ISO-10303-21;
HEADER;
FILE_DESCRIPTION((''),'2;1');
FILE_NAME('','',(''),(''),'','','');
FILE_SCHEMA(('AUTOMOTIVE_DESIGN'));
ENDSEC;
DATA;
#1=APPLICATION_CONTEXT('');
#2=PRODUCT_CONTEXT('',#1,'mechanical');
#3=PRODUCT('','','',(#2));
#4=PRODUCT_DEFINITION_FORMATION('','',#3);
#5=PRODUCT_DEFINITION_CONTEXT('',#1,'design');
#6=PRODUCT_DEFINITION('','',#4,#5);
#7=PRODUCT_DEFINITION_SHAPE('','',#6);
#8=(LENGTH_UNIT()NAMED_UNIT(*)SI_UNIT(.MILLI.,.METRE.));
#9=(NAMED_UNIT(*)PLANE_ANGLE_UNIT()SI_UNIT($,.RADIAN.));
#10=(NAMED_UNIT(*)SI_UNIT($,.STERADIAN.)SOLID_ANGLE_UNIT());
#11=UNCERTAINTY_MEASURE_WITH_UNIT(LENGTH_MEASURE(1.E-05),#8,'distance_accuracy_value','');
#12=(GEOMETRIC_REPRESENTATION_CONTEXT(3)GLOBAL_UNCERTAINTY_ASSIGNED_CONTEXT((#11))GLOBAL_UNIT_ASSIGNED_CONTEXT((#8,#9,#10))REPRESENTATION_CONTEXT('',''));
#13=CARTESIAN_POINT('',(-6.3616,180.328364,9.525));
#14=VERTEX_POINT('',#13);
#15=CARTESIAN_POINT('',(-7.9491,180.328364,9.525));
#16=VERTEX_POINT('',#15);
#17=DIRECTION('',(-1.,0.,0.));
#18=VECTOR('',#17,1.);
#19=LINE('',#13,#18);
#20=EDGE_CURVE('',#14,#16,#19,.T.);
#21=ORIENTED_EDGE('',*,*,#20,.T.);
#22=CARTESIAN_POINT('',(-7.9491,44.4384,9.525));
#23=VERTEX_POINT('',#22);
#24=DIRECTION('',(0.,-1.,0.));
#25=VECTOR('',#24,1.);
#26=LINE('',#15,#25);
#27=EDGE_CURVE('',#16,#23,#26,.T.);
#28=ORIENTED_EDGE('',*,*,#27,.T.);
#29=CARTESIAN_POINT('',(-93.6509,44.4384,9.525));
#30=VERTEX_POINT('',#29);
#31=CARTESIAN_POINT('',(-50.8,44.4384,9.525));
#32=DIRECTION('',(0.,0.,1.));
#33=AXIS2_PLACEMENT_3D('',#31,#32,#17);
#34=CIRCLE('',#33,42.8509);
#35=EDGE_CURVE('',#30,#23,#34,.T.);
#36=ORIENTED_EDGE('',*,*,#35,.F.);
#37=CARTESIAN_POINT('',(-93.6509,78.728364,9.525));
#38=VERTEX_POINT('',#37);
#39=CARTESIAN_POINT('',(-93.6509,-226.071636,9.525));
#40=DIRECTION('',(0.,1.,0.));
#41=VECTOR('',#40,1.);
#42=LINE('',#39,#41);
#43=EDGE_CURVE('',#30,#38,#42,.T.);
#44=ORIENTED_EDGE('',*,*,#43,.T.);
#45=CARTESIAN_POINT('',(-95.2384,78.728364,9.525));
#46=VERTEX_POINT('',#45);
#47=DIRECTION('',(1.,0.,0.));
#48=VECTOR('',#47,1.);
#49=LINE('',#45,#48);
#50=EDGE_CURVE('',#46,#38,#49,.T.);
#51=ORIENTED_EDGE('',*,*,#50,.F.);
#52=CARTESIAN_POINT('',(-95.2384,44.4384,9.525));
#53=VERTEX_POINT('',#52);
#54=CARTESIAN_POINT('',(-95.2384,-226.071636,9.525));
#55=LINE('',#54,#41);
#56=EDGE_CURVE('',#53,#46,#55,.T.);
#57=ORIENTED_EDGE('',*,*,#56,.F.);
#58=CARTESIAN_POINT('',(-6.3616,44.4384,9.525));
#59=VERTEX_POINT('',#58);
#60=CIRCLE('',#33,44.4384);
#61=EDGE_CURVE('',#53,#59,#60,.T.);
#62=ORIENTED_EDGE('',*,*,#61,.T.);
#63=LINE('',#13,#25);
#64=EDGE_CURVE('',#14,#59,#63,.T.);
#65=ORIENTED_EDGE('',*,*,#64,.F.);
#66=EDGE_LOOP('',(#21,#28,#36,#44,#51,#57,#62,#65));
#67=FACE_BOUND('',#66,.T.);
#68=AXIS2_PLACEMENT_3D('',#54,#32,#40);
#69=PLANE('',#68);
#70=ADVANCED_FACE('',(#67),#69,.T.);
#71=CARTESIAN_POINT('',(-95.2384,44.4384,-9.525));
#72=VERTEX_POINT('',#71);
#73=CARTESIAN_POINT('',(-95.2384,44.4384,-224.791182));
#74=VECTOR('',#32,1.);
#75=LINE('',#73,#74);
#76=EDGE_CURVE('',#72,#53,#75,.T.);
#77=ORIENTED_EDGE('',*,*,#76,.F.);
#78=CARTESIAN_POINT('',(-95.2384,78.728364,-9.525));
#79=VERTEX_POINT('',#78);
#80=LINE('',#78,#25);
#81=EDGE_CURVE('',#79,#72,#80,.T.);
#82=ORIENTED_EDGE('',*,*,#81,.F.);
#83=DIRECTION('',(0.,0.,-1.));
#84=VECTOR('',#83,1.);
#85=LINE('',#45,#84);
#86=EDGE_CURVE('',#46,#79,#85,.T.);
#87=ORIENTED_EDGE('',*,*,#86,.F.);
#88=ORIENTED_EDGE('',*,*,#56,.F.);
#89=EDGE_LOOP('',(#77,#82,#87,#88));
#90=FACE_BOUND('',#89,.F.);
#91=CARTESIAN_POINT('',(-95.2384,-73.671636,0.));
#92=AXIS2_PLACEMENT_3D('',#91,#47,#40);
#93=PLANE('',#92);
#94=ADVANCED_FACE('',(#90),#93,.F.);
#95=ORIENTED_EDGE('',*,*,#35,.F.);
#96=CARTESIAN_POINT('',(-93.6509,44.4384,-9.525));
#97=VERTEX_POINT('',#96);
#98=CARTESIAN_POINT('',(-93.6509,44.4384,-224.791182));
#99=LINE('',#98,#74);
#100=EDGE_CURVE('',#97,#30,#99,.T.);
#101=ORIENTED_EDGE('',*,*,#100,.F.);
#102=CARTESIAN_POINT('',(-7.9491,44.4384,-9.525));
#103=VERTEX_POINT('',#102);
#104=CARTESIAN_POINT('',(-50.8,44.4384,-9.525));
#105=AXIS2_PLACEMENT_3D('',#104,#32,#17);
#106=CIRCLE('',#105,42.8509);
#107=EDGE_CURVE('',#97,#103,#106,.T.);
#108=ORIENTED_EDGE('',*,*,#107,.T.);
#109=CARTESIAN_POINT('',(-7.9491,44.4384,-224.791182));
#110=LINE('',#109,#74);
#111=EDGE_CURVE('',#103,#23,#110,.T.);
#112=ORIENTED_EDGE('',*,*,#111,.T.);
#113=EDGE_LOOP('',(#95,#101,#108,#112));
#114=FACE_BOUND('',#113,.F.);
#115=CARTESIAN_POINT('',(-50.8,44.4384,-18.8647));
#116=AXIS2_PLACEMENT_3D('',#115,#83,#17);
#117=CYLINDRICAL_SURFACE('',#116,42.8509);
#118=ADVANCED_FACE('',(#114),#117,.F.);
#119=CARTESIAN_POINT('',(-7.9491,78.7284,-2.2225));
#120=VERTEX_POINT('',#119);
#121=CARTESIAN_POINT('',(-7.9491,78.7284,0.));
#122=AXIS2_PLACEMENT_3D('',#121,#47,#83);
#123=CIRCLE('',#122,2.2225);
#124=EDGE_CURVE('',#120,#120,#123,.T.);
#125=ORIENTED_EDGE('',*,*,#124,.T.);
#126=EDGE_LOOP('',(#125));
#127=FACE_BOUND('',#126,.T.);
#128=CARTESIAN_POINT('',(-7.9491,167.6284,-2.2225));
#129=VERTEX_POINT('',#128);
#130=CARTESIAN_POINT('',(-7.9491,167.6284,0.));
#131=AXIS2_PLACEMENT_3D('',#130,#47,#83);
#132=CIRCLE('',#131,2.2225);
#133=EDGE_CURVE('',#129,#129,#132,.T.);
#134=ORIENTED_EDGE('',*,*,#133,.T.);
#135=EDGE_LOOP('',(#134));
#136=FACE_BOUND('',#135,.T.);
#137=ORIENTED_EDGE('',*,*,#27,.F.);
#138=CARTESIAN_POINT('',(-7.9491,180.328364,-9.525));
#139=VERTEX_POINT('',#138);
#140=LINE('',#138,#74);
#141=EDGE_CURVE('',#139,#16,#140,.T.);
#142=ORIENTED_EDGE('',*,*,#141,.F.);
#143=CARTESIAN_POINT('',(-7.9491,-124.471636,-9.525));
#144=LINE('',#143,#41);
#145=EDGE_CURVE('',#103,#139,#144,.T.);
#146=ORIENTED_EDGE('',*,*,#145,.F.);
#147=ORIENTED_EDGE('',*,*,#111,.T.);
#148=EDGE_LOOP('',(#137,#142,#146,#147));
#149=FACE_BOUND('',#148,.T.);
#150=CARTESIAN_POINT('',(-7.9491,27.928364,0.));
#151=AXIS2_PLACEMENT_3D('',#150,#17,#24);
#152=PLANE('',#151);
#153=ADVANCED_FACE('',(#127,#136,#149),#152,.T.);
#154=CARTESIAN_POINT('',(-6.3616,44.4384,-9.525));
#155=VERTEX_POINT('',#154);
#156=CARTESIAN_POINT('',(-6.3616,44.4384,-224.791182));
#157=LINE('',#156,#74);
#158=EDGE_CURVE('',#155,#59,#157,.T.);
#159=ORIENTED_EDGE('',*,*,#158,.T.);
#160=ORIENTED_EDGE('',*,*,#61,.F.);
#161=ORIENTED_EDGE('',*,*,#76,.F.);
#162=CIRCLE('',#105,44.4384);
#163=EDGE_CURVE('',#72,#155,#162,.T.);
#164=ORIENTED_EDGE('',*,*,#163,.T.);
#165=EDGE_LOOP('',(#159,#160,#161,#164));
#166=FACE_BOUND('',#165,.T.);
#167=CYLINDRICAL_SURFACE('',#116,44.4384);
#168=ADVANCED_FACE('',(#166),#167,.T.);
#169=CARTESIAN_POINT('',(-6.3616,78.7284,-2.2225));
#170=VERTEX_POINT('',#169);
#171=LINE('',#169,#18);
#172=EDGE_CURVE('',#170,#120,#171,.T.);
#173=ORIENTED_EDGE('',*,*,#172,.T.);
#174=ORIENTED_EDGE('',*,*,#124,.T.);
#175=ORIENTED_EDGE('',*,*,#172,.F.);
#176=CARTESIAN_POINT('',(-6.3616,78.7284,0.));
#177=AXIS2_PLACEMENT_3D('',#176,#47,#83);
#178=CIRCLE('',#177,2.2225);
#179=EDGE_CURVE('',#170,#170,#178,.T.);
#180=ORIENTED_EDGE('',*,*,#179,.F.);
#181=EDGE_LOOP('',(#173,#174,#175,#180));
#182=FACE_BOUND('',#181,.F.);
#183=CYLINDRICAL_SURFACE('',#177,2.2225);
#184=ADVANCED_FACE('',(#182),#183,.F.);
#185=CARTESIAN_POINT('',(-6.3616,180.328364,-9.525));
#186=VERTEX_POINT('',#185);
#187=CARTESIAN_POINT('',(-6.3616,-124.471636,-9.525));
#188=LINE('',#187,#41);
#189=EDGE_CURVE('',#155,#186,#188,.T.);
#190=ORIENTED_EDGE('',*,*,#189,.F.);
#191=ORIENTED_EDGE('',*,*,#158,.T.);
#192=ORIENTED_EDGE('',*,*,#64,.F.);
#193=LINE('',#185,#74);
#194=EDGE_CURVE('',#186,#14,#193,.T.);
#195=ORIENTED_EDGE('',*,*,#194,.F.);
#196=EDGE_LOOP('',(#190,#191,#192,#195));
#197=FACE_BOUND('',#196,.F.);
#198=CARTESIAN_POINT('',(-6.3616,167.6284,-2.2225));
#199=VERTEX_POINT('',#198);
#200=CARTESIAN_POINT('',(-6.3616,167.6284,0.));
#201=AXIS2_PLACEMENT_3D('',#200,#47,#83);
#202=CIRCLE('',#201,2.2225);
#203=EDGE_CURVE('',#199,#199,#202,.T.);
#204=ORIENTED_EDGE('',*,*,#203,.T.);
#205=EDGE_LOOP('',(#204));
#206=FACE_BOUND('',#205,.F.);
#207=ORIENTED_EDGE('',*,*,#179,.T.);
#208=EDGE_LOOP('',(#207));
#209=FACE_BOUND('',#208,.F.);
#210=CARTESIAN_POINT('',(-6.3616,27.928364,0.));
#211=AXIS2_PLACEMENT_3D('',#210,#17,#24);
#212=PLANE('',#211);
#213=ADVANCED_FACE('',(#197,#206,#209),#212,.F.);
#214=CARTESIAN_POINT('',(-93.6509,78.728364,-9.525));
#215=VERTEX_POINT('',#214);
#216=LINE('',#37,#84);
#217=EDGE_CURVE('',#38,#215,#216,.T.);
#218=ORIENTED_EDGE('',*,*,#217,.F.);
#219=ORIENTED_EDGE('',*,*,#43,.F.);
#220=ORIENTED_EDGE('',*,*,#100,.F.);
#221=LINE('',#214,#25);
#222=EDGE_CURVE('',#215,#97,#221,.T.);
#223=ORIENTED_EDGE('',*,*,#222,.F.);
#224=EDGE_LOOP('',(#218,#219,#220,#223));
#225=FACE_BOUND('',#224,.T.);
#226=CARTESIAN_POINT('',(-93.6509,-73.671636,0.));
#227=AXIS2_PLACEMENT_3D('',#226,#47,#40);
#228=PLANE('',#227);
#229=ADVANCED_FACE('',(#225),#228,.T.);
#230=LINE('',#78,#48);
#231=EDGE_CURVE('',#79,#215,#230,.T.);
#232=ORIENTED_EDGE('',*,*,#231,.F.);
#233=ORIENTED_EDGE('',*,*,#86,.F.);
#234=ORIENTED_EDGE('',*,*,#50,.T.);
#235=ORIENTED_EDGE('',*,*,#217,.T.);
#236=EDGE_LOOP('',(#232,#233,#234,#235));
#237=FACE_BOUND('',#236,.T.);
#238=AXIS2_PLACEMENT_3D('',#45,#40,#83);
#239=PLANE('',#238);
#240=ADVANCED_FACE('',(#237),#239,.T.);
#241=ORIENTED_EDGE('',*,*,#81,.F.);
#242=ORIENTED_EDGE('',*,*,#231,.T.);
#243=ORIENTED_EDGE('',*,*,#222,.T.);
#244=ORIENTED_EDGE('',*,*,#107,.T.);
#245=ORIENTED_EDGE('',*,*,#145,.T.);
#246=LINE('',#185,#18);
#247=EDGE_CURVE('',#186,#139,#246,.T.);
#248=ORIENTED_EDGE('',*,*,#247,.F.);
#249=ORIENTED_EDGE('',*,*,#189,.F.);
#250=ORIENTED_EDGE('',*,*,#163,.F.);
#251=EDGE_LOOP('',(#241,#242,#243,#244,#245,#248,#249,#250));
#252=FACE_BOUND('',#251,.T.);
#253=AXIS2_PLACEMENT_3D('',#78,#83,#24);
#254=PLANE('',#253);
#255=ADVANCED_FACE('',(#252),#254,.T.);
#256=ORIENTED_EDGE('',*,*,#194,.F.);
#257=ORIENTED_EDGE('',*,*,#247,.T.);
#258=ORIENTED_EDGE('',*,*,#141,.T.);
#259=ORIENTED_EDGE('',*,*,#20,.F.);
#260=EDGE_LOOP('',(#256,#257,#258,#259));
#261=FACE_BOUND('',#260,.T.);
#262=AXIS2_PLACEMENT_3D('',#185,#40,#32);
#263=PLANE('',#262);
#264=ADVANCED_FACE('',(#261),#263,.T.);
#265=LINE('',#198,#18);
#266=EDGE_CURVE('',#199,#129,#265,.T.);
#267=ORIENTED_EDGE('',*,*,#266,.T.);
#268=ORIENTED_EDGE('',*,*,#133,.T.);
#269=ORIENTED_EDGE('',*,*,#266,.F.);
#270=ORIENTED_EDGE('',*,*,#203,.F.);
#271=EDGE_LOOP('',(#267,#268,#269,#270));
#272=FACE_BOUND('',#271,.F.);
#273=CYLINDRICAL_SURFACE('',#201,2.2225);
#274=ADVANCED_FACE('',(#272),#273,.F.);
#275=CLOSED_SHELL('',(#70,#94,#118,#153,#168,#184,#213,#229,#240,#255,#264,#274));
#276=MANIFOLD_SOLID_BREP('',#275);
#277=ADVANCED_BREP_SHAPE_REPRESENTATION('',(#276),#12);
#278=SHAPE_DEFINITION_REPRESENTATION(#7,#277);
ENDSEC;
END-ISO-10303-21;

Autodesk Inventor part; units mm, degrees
ref_plane "YZ Plane" through (0, 0, 0) normal (1, 0, 0) x (0, 1, 0)
ref_plane "XZ Plane" through (0, 0, 0) normal (0, 1, 0) x (-1, 0, 0)
ref_plane "XY Plane" through (0, 0, 0) normal (0, 0, 1) x (1, 0, 0)
sketch "Sketch1" plane through (0, 0, 0) normal (0, 1, 0) x (-1, 0, 0)
  line L0 (152.4, -9.525) -> (-152.4, -9.525)
  line L1 (-152.4, -9.525) -> (-152.4, 9.525)
  line L2 (-152.4, 9.525) -> (152.4, 9.525)
  line L3 (152.4, 9.525) -> (152.4, -9.525)
  line L4 (152.4, -9.525) -> (-152.4, 9.525) construction
  line L5 (-152.4, -9.525) -> (152.4, 9.525) construction
  point P0 (0, 0)
  dimension "d0" = 19.05
  dimension "d1" = 304.8
extrude "Extrusion1" add sketch "Sketch1" along normal blind 1.5875
sketch "Sketch2" plane through (0, 1.5875, 0) normal (0, 1, 0) x (1, 0, 0)
  line L0 (152.4, -9.525) -> (152.4, 9.525) projected
  line L1 (50.8, 36.3839) -> (50.8, -48.8029) construction
  line L2 (-50.8, 37.7294) -> (-50.8, -44.9073)
  line L3 (152.4, 9.525) -> (-152.4, 9.525) projected
  line L4 (-152.4, 9.525) -> (-152.4, -9.525) projected
  line L5 (-152.4, -9.525) -> (152.4, -9.525) projected
  line L6 (152.4, -9.525) -> (152.4, 9.525) projected
  line L7 (-152.4, 9.525) -> (50.8, -9.525) construction
  line L8 (50.8, 9.525) -> (-152.4, -9.525) construction
  point P0 (0, 0)
  point P1 (-50.8, 0)
  dimension "d4" = 101.6
bend part "Bend Part2" radius 42.8509 angle 180 line through (-50.8, 1.5875, -37.7294) along (0, 0, 1) centre toward (0, 1, 0) moving side (1, 0, 0) both sides yes
sketch "Sketch3" plane through (-6.3616, 44.4384, -9.525) normal (1, 0, 0) x (0, 0, -1)
  line L0 (-19.05, 0) -> (0, 0) projected
  line L1 (0, 135.89) -> (-19.05, 135.89) projected
  line L2 (-19.05, 135.89) -> (-19.05, 0) projected
  circle A0 centre (-9.525, 123.19) radius 2.2225
  line L3 (-19.05, 0) -> (0, 135.89) construction
  line L4 (-19.05, 135.89) -> (0, 0) construction
  line L5 (-9.525, 0) -> (-9.525, 135.89) construction
  circle A1 centre (-9.525, 34.29) radius 2.2225
  point P0 (-9.525, -44.4384)
  dimension "d9" = 4.445
  dimension "d10" = 12.7
  dimension "d13" = 88.9
extrude "Extrusion2" cut sketch "Sketch3" against normal blind 1.5875
properties part number "side guard" material "Polycarbonate, Clear"
